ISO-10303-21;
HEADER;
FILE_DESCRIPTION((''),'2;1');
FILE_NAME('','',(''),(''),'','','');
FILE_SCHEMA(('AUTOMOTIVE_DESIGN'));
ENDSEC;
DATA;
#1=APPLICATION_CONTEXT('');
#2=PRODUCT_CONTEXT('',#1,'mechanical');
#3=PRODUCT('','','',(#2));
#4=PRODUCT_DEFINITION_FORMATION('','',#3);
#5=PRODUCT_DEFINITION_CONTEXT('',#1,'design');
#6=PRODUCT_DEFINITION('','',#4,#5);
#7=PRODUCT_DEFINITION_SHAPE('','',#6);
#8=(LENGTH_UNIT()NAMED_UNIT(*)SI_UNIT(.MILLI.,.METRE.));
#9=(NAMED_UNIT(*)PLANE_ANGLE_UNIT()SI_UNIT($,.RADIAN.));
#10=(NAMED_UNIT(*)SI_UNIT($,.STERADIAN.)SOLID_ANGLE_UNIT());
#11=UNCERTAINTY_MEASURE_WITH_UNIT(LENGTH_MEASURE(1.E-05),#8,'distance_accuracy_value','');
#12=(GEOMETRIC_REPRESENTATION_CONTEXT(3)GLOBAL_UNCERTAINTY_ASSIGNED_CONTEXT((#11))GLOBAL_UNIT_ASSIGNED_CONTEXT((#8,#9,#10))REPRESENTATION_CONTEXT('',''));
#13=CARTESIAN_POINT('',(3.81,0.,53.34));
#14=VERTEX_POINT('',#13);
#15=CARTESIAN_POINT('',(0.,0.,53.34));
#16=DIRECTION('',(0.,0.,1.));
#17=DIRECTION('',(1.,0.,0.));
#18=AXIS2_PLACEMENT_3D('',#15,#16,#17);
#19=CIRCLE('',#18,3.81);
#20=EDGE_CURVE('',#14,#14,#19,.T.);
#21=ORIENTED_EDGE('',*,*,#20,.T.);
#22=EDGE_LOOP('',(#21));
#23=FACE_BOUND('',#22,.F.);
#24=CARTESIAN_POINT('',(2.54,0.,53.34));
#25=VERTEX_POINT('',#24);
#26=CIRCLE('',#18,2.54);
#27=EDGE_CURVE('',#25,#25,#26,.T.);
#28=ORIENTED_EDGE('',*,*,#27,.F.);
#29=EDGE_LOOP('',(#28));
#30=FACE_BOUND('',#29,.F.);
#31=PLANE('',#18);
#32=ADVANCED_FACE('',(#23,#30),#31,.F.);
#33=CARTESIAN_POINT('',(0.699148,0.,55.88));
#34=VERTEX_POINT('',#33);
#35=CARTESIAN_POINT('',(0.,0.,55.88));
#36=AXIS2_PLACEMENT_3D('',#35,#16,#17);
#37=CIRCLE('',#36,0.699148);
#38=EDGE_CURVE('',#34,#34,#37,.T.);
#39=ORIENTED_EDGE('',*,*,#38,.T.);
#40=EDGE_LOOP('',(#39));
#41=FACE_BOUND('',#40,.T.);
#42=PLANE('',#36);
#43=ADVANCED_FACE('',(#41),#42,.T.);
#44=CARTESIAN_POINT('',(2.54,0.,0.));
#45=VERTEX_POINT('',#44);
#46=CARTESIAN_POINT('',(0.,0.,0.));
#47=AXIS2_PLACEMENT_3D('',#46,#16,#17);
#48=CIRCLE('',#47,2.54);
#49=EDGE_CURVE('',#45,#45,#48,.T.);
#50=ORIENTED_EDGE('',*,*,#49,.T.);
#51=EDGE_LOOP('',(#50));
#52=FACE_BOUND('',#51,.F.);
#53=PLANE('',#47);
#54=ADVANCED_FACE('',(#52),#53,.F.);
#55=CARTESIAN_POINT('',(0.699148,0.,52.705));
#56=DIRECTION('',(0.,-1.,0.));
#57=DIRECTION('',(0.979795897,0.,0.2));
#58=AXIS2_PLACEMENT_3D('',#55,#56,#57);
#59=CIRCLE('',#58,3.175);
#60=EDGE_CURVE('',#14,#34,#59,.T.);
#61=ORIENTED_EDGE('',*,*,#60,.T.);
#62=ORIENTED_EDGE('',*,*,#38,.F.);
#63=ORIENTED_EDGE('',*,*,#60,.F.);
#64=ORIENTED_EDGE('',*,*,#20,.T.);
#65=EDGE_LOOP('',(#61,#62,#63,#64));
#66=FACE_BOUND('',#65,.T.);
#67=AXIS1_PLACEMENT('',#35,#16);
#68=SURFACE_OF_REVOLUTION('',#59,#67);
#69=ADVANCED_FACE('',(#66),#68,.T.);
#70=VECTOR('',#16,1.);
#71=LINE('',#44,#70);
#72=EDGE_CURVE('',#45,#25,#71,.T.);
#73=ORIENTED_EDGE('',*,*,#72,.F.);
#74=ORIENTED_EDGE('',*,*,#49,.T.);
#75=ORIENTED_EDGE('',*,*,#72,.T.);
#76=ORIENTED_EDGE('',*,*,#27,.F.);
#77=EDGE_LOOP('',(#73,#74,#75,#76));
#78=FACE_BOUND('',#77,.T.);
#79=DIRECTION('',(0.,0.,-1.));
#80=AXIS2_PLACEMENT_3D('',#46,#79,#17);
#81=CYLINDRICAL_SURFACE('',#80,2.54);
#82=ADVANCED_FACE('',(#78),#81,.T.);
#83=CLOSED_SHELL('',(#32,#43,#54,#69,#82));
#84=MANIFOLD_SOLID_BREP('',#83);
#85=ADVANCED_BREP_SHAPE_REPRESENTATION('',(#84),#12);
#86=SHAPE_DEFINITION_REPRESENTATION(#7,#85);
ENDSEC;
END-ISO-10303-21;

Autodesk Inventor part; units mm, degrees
ref_plane "YZ Plane" through (0, 0, 0) normal (1, 0, 0) x (0, 1, 0)
ref_plane "XZ Plane" through (0, 0, 0) normal (0, 1, 0) x (-1, 0, 0)
ref_plane "XY Plane" through (0, 0, 0) normal (0, 0, 1) x (1, 0, 0)
sketch "Sketch1" plane through (0, 0, 0) normal (0, 0, 1) x (1, 0, 0)
  circle A0 centre (0, 0) radius 2.54
  dimension "d0" = 5.08
extrude "Extrusion1" add sketch "Sketch1" along normal blind 53.34
sketch "Sketch2" plane through (0, 0, 53.34) normal (0, 0, 1) x (1, 0, 0)
  circle A0 centre (0, 0) radius 2.54 projected
  circle A1 centre (0, 0) radius 3.81
  dimension "d3" = 7.62
extrude "Extrusion2" add sketch "Sketch2" along normal blind 2.54 contours A0 | A1
fillet "Fillet1" radius 3.175 1 edges at (-3.81, 0, 55.88)
properties part number "HingeBolt"
